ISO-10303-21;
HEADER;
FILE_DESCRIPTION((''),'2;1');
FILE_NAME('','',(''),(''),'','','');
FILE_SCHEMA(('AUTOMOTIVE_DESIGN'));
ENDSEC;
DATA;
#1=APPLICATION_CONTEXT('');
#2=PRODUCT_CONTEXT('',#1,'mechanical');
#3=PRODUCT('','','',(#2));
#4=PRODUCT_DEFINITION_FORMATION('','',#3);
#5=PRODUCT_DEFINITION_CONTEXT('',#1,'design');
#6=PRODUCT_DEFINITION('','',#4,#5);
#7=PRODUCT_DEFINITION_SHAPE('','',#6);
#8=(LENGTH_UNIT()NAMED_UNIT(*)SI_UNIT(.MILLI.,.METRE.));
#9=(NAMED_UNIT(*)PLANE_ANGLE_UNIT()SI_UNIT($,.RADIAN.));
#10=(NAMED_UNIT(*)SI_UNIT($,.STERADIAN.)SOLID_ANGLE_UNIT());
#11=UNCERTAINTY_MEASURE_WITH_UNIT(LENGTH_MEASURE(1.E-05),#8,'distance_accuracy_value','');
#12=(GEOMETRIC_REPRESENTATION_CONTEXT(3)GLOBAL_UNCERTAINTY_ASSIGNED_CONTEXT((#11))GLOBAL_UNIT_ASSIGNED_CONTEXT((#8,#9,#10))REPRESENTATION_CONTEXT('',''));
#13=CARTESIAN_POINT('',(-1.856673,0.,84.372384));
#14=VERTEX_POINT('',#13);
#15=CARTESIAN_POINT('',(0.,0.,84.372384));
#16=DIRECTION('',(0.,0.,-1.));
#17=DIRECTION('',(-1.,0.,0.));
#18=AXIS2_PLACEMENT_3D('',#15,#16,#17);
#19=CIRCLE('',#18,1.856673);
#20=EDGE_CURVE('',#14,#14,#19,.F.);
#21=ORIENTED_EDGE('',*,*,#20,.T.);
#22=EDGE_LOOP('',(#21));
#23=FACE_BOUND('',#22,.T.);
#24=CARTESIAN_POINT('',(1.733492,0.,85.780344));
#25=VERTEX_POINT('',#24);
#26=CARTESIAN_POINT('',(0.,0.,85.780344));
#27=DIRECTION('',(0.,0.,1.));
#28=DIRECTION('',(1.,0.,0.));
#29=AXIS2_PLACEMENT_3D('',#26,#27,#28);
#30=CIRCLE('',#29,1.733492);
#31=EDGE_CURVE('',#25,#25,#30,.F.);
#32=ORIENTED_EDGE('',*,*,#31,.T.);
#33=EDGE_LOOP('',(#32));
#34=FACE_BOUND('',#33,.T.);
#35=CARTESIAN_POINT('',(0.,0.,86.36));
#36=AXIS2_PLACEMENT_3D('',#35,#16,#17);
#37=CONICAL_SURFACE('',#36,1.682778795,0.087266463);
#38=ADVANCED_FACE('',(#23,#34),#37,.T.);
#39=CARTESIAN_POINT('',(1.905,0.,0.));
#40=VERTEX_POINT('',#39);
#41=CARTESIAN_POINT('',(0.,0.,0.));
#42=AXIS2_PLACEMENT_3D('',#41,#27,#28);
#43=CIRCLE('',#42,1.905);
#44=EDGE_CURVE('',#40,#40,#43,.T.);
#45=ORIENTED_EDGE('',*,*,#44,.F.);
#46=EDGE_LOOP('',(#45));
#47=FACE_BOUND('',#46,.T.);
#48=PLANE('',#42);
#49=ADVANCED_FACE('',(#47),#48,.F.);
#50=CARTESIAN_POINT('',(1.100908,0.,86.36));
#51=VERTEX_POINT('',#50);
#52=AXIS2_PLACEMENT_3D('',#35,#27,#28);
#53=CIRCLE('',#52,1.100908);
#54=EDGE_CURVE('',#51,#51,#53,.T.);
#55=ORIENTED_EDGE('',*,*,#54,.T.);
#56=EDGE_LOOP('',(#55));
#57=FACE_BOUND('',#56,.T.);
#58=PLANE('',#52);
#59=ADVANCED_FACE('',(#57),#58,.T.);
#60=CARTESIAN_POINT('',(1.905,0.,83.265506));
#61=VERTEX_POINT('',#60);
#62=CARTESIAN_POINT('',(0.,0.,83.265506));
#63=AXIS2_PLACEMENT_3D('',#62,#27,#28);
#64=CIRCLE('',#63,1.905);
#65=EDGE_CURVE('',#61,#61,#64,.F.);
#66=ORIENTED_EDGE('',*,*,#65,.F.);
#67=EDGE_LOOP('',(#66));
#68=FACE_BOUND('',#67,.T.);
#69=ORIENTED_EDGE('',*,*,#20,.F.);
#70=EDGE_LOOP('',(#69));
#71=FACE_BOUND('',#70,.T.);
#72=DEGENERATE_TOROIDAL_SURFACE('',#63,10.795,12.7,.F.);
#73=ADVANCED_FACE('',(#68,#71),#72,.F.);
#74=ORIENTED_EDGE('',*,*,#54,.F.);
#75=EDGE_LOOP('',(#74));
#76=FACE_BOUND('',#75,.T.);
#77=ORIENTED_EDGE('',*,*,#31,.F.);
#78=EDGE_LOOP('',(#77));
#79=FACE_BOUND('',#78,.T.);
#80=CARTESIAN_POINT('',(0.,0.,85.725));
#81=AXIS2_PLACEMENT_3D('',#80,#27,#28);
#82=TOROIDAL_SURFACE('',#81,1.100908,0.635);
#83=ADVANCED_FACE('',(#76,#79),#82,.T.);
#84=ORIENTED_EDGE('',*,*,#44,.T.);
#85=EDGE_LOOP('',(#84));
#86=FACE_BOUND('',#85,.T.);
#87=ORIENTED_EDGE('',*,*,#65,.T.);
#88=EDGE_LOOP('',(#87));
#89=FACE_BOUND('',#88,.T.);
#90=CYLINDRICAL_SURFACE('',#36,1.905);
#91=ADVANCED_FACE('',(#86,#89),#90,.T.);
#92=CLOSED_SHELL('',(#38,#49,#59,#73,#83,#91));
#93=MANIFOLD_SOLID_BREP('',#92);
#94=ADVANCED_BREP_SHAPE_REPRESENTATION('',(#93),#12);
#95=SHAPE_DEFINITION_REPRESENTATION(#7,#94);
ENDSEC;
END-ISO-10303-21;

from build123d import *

# Parameters (mm, degrees)
SKETCH2_R           = 1.905
BOSS_EXTRUDE1_DEPTH = 86.36
CHAMFER1_SIZE       = 2.54
CHAMFER1_SIZE2      = 0.222221205
FILLET1_R           = 12.7
FILLET2_R           = 0.635


with BuildPart() as part:
    # Sketch2 → Boss-Extrude1 (new body)
    with BuildSketch(Plane.XY):
        Circle(SKETCH2_R)
    extrude(amount=BOSS_EXTRUDE1_DEPTH)

    # Chamfer1
    chamfer1_edges = [part.edges().sort_by_distance(p)[0] for p in [
        (-1.905, 0, 86.36),
    ]]
    chamfer1_side = [part.faces().sort_by_distance(p)[0] for p in [
        (-1.905, 0, 43.18),
    ]]
    chamfer(chamfer1_edges, length=CHAMFER1_SIZE, length2=CHAMFER1_SIZE2, reference=chamfer1_side[0])

    # Fillet1
    # the kernel refuses this fillet: 12.7 mm, written as the material it takes off along each edge
    with BuildSketch(Plane(origin=(0, 0, 83.82), x_dir=(1, 0, 0), z_dir=(0, -1, 0))) as fillet1_piece_1:
        with BuildLine():
            CenterArc((1.905 - FILLET1_R, -FILLET1_R * 0.0436609429085), FILLET1_R, 0, 5)
            Line((1.905 - FILLET1_R * 0.00380530190825, FILLET1_R * 0.0434947998391), (1.905, 0))
            Line((1.905, 0), (1.905, -FILLET1_R * 0.0436609429085))
        make_face()
    revolve(axis=Axis((0, 0, 83.82), (0, 0, 1)), mode=Mode.SUBTRACT)

    # Fillet2
    fillet2_edges = [part.edges().sort_by_distance(p)[0] for p in [
        (-1.682778795, 0, 86.36),
    ]]
    fillet(fillet2_edges, radius=FILLET2_R)


solid = part.part
